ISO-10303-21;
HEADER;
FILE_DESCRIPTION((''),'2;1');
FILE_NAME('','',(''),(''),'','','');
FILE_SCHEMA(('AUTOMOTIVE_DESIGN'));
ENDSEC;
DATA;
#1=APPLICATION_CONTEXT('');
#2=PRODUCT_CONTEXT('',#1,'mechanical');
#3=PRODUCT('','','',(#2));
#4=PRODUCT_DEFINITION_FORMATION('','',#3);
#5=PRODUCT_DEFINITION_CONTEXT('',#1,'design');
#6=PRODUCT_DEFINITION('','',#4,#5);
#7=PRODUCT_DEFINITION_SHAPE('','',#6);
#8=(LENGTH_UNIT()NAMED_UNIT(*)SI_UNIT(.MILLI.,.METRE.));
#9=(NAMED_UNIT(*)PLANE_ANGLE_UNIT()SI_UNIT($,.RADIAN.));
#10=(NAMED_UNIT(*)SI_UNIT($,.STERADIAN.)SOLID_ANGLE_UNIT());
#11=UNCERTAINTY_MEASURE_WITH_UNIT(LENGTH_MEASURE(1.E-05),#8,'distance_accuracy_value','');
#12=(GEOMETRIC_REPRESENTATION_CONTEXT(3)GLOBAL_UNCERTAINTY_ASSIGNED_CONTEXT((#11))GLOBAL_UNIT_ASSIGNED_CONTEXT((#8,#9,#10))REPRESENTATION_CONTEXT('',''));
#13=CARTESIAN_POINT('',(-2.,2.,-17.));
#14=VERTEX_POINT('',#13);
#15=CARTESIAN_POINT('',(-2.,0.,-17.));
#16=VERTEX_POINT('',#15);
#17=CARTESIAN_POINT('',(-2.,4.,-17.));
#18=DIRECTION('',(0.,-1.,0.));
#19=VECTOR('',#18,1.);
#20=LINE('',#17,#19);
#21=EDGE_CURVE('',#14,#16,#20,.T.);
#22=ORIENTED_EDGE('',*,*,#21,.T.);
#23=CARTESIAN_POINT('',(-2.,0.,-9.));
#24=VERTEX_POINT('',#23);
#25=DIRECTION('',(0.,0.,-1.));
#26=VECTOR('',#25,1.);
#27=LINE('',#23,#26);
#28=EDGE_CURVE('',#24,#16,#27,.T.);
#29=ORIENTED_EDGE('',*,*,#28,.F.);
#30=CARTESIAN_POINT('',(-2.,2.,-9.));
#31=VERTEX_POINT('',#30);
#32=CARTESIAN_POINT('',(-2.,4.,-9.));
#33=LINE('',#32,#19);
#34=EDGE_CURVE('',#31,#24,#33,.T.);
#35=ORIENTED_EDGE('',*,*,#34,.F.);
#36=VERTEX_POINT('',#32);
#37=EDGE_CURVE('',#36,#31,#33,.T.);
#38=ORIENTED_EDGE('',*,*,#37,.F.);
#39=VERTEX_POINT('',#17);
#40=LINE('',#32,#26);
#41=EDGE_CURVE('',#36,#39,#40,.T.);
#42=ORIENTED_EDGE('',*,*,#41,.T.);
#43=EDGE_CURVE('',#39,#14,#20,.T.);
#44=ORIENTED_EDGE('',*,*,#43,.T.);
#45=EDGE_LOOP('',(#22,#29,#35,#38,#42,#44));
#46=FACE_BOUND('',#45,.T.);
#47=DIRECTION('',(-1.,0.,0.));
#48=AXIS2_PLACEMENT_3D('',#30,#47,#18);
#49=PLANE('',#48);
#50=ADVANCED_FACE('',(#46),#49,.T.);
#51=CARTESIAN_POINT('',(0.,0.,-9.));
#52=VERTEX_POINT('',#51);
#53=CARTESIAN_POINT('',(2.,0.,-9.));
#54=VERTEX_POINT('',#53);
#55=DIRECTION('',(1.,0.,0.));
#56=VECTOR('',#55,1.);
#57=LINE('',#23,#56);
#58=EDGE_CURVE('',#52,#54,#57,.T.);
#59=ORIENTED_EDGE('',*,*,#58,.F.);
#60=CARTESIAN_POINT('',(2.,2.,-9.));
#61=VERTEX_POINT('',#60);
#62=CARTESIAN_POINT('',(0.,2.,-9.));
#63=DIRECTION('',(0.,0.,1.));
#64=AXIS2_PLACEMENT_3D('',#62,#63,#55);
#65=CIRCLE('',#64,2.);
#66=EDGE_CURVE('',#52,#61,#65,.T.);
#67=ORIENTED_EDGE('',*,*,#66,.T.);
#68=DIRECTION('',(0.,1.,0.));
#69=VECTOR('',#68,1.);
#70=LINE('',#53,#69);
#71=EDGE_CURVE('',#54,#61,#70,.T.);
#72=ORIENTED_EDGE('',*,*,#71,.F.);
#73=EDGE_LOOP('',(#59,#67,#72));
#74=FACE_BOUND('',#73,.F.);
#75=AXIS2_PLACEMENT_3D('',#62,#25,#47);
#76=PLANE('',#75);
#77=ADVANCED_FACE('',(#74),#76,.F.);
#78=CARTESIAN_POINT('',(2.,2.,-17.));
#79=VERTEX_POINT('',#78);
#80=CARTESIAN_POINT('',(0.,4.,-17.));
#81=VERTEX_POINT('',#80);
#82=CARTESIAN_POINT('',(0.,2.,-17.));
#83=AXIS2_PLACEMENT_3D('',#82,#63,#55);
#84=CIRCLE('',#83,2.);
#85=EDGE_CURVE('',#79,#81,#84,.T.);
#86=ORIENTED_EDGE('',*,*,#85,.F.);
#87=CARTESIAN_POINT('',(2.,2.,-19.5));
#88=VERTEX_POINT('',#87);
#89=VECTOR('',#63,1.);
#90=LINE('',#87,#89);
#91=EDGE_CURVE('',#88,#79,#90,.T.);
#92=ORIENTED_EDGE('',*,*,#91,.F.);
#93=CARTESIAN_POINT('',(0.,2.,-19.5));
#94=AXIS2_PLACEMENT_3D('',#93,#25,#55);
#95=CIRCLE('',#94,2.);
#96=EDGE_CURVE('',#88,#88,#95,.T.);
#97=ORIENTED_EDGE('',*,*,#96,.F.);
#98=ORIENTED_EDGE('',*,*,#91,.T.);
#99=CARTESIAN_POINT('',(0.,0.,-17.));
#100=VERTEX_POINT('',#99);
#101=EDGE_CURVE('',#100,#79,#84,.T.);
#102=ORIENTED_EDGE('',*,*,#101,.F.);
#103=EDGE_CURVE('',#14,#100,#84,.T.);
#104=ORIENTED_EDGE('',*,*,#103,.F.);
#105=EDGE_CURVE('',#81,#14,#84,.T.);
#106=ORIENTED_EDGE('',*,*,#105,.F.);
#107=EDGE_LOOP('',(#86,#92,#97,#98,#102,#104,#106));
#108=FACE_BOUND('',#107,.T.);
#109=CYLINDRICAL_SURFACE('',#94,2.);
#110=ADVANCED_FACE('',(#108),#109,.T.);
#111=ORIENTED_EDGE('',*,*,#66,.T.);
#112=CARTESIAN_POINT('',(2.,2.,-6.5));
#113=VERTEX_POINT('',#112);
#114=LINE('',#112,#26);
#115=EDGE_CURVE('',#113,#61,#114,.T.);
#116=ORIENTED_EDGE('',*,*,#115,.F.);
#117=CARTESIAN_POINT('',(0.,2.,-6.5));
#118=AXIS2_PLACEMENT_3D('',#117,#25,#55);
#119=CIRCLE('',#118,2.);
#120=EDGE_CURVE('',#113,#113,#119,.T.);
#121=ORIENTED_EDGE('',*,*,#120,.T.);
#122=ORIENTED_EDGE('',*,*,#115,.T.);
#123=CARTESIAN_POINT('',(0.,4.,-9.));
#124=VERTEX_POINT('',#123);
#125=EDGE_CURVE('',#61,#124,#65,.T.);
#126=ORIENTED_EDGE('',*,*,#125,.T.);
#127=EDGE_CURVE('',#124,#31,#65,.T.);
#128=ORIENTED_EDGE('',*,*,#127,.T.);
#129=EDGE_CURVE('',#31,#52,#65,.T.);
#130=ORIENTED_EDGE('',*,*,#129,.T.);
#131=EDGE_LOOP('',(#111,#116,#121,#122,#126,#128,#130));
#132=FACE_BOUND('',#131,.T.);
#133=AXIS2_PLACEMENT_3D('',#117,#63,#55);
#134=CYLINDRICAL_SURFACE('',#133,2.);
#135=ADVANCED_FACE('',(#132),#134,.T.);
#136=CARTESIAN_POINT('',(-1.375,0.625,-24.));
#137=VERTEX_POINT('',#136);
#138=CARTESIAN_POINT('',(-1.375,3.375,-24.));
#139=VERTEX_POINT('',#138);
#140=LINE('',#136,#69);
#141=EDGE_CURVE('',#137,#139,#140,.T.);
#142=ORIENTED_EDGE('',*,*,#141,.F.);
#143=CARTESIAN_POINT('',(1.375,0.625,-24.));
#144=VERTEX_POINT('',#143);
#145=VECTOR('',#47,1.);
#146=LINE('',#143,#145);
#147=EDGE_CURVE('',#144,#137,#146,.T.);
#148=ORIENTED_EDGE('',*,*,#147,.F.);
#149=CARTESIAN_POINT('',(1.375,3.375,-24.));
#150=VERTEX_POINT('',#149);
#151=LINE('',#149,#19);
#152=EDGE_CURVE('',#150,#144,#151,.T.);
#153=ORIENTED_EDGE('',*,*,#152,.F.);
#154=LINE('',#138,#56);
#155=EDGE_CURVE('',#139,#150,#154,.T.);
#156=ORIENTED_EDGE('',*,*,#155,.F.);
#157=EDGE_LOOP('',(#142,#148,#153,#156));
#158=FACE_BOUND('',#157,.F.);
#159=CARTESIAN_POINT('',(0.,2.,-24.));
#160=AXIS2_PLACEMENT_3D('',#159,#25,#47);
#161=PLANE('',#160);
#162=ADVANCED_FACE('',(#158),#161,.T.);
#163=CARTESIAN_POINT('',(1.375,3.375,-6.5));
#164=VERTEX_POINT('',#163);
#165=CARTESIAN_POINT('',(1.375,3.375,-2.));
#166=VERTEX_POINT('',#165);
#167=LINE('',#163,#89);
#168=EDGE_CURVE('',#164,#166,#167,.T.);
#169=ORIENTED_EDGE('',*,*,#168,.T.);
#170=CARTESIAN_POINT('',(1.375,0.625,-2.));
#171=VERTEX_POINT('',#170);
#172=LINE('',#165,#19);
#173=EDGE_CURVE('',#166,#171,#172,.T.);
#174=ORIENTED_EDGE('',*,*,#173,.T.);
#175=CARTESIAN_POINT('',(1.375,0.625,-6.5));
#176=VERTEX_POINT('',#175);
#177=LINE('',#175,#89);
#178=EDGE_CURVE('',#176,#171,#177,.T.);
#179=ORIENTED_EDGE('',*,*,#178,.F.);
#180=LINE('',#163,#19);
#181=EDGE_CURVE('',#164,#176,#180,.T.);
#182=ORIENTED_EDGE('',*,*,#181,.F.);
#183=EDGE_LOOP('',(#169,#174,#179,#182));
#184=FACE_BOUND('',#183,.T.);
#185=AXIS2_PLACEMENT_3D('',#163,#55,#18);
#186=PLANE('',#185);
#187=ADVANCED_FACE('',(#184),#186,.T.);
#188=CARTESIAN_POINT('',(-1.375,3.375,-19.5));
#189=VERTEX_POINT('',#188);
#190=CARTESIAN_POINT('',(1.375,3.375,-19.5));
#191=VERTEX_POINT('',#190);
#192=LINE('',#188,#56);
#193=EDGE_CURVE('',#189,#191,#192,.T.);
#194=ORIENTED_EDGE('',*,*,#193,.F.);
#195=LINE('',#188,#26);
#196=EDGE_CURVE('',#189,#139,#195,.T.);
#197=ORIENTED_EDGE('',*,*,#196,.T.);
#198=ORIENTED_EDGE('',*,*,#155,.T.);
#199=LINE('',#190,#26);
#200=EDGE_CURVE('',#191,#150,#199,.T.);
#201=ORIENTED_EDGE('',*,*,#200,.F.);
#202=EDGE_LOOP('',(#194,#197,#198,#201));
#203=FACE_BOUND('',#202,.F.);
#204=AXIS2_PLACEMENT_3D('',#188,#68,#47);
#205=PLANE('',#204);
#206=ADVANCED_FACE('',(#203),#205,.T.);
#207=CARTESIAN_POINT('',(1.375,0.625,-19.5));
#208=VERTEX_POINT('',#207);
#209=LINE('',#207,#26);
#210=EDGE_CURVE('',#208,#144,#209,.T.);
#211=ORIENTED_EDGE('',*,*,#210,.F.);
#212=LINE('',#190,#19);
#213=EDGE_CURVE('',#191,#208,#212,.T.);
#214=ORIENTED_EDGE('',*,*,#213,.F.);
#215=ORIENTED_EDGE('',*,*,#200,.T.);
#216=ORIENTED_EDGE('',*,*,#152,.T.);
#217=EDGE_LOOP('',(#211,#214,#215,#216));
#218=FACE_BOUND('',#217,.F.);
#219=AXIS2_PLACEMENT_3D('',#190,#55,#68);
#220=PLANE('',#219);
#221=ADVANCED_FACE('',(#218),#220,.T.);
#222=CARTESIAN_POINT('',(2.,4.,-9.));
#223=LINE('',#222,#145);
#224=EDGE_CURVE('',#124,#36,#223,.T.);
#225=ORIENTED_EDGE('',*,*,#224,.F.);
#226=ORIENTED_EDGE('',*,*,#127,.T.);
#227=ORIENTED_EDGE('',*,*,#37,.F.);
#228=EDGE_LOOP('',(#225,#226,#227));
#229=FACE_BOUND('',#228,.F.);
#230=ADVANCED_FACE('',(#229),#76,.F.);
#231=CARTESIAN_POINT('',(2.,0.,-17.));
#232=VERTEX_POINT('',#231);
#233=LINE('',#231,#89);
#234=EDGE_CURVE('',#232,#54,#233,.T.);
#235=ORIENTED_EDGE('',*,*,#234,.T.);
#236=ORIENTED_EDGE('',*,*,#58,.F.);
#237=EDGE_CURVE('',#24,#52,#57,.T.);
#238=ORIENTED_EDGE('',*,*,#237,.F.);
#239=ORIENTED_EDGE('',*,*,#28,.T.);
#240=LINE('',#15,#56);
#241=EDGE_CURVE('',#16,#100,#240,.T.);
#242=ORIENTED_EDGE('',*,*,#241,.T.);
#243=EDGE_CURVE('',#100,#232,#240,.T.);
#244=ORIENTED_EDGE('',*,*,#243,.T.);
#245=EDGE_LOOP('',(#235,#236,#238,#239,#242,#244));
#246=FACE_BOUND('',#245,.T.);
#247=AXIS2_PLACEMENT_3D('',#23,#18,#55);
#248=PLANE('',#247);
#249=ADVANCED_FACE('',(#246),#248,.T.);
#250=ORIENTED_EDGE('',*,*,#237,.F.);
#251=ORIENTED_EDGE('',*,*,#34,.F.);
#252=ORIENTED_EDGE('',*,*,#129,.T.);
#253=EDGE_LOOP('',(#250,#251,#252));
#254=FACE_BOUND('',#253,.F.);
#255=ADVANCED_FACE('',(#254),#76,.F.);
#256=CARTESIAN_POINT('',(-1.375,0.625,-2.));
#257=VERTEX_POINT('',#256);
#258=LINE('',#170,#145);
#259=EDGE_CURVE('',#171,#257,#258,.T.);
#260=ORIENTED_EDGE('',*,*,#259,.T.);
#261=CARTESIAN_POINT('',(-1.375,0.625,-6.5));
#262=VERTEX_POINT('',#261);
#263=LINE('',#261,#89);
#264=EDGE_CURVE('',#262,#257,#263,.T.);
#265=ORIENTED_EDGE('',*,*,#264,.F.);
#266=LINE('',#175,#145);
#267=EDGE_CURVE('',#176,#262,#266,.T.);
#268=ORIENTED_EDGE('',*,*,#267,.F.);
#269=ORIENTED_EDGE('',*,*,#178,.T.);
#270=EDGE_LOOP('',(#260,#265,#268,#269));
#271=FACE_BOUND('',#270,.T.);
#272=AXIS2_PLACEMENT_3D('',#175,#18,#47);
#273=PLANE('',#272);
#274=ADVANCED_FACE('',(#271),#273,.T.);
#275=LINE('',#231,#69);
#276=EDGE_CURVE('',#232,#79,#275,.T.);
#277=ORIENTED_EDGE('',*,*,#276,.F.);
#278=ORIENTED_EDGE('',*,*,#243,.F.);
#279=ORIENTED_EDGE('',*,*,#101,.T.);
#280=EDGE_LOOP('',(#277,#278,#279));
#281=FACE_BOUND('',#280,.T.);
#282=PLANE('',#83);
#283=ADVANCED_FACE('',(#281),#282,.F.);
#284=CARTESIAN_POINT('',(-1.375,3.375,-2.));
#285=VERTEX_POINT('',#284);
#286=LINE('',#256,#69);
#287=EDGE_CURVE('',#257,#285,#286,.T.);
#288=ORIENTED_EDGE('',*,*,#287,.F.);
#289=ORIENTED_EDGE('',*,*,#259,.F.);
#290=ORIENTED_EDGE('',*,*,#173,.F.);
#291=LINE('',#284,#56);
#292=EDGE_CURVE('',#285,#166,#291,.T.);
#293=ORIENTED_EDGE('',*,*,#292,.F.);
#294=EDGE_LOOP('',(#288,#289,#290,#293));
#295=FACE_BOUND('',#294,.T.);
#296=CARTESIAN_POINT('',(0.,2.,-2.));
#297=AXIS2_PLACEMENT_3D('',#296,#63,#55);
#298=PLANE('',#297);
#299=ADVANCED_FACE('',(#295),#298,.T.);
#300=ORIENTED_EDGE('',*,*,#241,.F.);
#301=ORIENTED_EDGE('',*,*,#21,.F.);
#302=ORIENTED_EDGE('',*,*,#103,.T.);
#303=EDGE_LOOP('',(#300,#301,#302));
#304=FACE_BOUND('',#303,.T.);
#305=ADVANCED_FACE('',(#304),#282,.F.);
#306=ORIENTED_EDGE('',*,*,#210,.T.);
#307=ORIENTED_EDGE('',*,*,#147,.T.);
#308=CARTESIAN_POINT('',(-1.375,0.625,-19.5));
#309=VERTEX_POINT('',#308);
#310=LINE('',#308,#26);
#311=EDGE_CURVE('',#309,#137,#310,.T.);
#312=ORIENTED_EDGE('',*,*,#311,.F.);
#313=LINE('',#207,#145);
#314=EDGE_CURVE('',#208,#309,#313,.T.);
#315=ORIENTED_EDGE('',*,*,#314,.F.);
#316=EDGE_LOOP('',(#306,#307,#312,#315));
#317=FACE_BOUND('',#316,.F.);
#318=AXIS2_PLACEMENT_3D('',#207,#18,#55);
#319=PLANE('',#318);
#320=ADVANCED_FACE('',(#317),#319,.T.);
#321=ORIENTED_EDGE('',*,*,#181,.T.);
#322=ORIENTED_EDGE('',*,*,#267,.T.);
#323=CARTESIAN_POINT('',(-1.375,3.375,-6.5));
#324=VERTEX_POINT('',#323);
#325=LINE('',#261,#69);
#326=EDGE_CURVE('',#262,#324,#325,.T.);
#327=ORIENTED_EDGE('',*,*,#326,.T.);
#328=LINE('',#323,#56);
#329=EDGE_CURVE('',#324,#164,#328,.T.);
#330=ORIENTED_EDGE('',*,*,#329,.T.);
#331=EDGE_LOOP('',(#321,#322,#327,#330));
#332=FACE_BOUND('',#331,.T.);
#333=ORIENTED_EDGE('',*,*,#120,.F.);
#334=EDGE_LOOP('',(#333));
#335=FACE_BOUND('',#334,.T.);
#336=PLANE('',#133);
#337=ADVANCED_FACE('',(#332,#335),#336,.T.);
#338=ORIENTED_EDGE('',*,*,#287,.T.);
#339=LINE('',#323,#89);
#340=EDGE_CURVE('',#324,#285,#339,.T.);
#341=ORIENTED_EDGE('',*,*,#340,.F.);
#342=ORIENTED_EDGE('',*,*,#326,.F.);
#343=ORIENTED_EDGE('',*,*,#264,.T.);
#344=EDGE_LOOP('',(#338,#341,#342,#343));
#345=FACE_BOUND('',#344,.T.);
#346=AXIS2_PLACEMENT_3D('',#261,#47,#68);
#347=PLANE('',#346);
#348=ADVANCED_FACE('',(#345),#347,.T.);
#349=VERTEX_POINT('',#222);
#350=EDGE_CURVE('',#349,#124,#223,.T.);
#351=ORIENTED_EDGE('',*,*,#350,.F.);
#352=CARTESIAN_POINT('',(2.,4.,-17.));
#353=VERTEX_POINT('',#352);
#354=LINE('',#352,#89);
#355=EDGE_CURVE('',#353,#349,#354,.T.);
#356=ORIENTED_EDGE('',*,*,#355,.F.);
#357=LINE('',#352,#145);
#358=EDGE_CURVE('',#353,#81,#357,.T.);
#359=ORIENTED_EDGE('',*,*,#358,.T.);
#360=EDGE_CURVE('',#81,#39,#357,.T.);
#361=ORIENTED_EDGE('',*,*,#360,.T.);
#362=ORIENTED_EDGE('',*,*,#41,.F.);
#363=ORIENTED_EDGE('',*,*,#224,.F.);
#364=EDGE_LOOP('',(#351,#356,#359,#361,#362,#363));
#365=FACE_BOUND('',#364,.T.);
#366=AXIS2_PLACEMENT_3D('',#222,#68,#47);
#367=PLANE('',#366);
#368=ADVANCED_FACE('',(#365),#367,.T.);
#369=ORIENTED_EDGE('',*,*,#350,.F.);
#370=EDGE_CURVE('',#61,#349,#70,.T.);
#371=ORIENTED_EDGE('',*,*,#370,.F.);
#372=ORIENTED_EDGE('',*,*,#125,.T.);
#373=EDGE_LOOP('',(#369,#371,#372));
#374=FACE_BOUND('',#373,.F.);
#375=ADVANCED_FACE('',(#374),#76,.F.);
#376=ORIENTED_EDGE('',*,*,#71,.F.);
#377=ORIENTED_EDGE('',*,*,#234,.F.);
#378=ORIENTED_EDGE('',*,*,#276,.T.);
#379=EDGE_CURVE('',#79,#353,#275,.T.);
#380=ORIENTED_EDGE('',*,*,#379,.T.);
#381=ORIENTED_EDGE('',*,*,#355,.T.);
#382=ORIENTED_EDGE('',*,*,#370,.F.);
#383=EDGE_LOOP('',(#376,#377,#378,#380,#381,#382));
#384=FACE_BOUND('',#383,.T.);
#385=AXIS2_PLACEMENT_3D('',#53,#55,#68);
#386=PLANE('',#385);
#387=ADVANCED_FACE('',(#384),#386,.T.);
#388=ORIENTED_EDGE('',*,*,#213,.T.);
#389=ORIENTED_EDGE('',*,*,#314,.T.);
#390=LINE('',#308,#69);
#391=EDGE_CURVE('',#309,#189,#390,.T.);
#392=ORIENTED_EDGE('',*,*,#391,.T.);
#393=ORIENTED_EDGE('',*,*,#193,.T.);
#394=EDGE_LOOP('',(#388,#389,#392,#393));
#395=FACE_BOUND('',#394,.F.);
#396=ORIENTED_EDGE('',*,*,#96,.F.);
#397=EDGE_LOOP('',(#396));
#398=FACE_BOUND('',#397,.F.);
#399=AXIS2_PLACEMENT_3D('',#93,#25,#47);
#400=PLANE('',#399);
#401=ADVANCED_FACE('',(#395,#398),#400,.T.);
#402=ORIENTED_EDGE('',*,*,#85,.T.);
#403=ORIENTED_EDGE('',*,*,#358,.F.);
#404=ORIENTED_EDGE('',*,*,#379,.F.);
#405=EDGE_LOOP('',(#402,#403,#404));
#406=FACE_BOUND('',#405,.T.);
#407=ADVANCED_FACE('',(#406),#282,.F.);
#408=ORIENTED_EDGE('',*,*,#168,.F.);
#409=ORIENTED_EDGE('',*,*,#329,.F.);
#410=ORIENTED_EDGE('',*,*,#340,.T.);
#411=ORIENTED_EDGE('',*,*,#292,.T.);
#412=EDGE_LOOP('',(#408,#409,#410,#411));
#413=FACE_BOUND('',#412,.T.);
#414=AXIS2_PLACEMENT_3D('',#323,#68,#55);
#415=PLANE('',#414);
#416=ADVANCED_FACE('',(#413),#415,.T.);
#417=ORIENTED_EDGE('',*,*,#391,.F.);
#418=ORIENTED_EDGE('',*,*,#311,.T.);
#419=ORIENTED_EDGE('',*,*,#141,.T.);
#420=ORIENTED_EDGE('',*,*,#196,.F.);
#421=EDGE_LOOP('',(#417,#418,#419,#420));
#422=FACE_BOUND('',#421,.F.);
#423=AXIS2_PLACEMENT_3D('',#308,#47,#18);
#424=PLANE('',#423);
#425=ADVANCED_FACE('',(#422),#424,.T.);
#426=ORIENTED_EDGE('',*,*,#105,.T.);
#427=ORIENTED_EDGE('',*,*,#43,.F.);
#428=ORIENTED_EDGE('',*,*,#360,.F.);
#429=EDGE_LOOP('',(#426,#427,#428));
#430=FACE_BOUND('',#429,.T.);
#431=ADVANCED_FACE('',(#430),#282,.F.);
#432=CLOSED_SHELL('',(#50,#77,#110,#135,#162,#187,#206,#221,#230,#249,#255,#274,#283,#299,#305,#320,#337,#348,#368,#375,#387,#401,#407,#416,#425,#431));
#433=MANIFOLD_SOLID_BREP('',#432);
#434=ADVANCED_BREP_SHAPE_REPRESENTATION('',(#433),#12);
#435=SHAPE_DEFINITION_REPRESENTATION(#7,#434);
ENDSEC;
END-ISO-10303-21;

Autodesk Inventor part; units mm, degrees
ref_plane "YZ Plane" through (0, 0, 0) normal (1, 0, 0) x (0, 1, 0)
ref_plane "XZ Plane" through (0, 0, 0) normal (0, 1, 0) x (-1, 0, 0)
ref_plane "XY Plane" through (0, 0, 0) normal (0, 0, 1) x (1, 0, 0)
sketch "Sketch1" plane through (0, 0, 0) normal (0, 0, 1) x (1, 0, 0)
  circle A0 centre (0, 0) radius 4
  line L0 (4, 0) -> (2, -3.4641)
  line L1 (2, -3.4641) -> (-2, -3.4641)
  line L2 (-2, -3.4641) -> (-4, 0)
  line L3 (-4, 0) -> (-2, 3.4641)
  line L4 (-2, 3.4641) -> (2, 3.4641)
  line L5 (2, 3.4641) -> (4, 0)
  dimension "d0" = 8
extrude "Extrusion1" add sketch "Sketch1" against normal blind 5
sketch "Sketch2" plane through (0, 0, -5) normal (0, 0, -1) x (-1, 0, 0)
  circle A0 centre (0, 0) radius 4 projected
  line L0 (-4, 4) -> (4, 4)
  line L1 (4, 4) -> (4, -4)
  line L2 (4, -4) -> (-4, -4)
  line L3 (-4, -4) -> (-4, 4)
  point P0 (-4, 0)
extrude "Extrusion2" add sketch "Sketch2" along normal blind 8
sketch "Sketch3" plane through (0, 0, 0) normal (0, 0, 1) x (1, 0, 0)
  line L0 (4, -2.3094) -> (0, -4.6188) projected
  line L1 (-2.75, -2.75) -> (-2.75, 2.75)
  line L2 (-2.75, 2.75) -> (2.75, 2.75)
  line L3 (2.75, 2.75) -> (2.75, -2.75)
  line L4 (2.75, -2.75) -> (-2.75, -2.75)
  point P0 (0, 0)
  point P1 (0, -2.75)
  dimension "d7" = 5.5
  dimension "d8" = 5.5
extrude "Extrusion3" add sketch "Sketch3" along normal blind 9
mirror "Mirror1" about plane through (0, 0, -13) normal (0, 0, -1) of "Extrusion1", "Extrusion2", "Extrusion3"
scale "Scale1" factors (0.5, 0.5, 0.5) then translate (0, 2, -6.5) bodies 1
properties part number "GearAxis"
